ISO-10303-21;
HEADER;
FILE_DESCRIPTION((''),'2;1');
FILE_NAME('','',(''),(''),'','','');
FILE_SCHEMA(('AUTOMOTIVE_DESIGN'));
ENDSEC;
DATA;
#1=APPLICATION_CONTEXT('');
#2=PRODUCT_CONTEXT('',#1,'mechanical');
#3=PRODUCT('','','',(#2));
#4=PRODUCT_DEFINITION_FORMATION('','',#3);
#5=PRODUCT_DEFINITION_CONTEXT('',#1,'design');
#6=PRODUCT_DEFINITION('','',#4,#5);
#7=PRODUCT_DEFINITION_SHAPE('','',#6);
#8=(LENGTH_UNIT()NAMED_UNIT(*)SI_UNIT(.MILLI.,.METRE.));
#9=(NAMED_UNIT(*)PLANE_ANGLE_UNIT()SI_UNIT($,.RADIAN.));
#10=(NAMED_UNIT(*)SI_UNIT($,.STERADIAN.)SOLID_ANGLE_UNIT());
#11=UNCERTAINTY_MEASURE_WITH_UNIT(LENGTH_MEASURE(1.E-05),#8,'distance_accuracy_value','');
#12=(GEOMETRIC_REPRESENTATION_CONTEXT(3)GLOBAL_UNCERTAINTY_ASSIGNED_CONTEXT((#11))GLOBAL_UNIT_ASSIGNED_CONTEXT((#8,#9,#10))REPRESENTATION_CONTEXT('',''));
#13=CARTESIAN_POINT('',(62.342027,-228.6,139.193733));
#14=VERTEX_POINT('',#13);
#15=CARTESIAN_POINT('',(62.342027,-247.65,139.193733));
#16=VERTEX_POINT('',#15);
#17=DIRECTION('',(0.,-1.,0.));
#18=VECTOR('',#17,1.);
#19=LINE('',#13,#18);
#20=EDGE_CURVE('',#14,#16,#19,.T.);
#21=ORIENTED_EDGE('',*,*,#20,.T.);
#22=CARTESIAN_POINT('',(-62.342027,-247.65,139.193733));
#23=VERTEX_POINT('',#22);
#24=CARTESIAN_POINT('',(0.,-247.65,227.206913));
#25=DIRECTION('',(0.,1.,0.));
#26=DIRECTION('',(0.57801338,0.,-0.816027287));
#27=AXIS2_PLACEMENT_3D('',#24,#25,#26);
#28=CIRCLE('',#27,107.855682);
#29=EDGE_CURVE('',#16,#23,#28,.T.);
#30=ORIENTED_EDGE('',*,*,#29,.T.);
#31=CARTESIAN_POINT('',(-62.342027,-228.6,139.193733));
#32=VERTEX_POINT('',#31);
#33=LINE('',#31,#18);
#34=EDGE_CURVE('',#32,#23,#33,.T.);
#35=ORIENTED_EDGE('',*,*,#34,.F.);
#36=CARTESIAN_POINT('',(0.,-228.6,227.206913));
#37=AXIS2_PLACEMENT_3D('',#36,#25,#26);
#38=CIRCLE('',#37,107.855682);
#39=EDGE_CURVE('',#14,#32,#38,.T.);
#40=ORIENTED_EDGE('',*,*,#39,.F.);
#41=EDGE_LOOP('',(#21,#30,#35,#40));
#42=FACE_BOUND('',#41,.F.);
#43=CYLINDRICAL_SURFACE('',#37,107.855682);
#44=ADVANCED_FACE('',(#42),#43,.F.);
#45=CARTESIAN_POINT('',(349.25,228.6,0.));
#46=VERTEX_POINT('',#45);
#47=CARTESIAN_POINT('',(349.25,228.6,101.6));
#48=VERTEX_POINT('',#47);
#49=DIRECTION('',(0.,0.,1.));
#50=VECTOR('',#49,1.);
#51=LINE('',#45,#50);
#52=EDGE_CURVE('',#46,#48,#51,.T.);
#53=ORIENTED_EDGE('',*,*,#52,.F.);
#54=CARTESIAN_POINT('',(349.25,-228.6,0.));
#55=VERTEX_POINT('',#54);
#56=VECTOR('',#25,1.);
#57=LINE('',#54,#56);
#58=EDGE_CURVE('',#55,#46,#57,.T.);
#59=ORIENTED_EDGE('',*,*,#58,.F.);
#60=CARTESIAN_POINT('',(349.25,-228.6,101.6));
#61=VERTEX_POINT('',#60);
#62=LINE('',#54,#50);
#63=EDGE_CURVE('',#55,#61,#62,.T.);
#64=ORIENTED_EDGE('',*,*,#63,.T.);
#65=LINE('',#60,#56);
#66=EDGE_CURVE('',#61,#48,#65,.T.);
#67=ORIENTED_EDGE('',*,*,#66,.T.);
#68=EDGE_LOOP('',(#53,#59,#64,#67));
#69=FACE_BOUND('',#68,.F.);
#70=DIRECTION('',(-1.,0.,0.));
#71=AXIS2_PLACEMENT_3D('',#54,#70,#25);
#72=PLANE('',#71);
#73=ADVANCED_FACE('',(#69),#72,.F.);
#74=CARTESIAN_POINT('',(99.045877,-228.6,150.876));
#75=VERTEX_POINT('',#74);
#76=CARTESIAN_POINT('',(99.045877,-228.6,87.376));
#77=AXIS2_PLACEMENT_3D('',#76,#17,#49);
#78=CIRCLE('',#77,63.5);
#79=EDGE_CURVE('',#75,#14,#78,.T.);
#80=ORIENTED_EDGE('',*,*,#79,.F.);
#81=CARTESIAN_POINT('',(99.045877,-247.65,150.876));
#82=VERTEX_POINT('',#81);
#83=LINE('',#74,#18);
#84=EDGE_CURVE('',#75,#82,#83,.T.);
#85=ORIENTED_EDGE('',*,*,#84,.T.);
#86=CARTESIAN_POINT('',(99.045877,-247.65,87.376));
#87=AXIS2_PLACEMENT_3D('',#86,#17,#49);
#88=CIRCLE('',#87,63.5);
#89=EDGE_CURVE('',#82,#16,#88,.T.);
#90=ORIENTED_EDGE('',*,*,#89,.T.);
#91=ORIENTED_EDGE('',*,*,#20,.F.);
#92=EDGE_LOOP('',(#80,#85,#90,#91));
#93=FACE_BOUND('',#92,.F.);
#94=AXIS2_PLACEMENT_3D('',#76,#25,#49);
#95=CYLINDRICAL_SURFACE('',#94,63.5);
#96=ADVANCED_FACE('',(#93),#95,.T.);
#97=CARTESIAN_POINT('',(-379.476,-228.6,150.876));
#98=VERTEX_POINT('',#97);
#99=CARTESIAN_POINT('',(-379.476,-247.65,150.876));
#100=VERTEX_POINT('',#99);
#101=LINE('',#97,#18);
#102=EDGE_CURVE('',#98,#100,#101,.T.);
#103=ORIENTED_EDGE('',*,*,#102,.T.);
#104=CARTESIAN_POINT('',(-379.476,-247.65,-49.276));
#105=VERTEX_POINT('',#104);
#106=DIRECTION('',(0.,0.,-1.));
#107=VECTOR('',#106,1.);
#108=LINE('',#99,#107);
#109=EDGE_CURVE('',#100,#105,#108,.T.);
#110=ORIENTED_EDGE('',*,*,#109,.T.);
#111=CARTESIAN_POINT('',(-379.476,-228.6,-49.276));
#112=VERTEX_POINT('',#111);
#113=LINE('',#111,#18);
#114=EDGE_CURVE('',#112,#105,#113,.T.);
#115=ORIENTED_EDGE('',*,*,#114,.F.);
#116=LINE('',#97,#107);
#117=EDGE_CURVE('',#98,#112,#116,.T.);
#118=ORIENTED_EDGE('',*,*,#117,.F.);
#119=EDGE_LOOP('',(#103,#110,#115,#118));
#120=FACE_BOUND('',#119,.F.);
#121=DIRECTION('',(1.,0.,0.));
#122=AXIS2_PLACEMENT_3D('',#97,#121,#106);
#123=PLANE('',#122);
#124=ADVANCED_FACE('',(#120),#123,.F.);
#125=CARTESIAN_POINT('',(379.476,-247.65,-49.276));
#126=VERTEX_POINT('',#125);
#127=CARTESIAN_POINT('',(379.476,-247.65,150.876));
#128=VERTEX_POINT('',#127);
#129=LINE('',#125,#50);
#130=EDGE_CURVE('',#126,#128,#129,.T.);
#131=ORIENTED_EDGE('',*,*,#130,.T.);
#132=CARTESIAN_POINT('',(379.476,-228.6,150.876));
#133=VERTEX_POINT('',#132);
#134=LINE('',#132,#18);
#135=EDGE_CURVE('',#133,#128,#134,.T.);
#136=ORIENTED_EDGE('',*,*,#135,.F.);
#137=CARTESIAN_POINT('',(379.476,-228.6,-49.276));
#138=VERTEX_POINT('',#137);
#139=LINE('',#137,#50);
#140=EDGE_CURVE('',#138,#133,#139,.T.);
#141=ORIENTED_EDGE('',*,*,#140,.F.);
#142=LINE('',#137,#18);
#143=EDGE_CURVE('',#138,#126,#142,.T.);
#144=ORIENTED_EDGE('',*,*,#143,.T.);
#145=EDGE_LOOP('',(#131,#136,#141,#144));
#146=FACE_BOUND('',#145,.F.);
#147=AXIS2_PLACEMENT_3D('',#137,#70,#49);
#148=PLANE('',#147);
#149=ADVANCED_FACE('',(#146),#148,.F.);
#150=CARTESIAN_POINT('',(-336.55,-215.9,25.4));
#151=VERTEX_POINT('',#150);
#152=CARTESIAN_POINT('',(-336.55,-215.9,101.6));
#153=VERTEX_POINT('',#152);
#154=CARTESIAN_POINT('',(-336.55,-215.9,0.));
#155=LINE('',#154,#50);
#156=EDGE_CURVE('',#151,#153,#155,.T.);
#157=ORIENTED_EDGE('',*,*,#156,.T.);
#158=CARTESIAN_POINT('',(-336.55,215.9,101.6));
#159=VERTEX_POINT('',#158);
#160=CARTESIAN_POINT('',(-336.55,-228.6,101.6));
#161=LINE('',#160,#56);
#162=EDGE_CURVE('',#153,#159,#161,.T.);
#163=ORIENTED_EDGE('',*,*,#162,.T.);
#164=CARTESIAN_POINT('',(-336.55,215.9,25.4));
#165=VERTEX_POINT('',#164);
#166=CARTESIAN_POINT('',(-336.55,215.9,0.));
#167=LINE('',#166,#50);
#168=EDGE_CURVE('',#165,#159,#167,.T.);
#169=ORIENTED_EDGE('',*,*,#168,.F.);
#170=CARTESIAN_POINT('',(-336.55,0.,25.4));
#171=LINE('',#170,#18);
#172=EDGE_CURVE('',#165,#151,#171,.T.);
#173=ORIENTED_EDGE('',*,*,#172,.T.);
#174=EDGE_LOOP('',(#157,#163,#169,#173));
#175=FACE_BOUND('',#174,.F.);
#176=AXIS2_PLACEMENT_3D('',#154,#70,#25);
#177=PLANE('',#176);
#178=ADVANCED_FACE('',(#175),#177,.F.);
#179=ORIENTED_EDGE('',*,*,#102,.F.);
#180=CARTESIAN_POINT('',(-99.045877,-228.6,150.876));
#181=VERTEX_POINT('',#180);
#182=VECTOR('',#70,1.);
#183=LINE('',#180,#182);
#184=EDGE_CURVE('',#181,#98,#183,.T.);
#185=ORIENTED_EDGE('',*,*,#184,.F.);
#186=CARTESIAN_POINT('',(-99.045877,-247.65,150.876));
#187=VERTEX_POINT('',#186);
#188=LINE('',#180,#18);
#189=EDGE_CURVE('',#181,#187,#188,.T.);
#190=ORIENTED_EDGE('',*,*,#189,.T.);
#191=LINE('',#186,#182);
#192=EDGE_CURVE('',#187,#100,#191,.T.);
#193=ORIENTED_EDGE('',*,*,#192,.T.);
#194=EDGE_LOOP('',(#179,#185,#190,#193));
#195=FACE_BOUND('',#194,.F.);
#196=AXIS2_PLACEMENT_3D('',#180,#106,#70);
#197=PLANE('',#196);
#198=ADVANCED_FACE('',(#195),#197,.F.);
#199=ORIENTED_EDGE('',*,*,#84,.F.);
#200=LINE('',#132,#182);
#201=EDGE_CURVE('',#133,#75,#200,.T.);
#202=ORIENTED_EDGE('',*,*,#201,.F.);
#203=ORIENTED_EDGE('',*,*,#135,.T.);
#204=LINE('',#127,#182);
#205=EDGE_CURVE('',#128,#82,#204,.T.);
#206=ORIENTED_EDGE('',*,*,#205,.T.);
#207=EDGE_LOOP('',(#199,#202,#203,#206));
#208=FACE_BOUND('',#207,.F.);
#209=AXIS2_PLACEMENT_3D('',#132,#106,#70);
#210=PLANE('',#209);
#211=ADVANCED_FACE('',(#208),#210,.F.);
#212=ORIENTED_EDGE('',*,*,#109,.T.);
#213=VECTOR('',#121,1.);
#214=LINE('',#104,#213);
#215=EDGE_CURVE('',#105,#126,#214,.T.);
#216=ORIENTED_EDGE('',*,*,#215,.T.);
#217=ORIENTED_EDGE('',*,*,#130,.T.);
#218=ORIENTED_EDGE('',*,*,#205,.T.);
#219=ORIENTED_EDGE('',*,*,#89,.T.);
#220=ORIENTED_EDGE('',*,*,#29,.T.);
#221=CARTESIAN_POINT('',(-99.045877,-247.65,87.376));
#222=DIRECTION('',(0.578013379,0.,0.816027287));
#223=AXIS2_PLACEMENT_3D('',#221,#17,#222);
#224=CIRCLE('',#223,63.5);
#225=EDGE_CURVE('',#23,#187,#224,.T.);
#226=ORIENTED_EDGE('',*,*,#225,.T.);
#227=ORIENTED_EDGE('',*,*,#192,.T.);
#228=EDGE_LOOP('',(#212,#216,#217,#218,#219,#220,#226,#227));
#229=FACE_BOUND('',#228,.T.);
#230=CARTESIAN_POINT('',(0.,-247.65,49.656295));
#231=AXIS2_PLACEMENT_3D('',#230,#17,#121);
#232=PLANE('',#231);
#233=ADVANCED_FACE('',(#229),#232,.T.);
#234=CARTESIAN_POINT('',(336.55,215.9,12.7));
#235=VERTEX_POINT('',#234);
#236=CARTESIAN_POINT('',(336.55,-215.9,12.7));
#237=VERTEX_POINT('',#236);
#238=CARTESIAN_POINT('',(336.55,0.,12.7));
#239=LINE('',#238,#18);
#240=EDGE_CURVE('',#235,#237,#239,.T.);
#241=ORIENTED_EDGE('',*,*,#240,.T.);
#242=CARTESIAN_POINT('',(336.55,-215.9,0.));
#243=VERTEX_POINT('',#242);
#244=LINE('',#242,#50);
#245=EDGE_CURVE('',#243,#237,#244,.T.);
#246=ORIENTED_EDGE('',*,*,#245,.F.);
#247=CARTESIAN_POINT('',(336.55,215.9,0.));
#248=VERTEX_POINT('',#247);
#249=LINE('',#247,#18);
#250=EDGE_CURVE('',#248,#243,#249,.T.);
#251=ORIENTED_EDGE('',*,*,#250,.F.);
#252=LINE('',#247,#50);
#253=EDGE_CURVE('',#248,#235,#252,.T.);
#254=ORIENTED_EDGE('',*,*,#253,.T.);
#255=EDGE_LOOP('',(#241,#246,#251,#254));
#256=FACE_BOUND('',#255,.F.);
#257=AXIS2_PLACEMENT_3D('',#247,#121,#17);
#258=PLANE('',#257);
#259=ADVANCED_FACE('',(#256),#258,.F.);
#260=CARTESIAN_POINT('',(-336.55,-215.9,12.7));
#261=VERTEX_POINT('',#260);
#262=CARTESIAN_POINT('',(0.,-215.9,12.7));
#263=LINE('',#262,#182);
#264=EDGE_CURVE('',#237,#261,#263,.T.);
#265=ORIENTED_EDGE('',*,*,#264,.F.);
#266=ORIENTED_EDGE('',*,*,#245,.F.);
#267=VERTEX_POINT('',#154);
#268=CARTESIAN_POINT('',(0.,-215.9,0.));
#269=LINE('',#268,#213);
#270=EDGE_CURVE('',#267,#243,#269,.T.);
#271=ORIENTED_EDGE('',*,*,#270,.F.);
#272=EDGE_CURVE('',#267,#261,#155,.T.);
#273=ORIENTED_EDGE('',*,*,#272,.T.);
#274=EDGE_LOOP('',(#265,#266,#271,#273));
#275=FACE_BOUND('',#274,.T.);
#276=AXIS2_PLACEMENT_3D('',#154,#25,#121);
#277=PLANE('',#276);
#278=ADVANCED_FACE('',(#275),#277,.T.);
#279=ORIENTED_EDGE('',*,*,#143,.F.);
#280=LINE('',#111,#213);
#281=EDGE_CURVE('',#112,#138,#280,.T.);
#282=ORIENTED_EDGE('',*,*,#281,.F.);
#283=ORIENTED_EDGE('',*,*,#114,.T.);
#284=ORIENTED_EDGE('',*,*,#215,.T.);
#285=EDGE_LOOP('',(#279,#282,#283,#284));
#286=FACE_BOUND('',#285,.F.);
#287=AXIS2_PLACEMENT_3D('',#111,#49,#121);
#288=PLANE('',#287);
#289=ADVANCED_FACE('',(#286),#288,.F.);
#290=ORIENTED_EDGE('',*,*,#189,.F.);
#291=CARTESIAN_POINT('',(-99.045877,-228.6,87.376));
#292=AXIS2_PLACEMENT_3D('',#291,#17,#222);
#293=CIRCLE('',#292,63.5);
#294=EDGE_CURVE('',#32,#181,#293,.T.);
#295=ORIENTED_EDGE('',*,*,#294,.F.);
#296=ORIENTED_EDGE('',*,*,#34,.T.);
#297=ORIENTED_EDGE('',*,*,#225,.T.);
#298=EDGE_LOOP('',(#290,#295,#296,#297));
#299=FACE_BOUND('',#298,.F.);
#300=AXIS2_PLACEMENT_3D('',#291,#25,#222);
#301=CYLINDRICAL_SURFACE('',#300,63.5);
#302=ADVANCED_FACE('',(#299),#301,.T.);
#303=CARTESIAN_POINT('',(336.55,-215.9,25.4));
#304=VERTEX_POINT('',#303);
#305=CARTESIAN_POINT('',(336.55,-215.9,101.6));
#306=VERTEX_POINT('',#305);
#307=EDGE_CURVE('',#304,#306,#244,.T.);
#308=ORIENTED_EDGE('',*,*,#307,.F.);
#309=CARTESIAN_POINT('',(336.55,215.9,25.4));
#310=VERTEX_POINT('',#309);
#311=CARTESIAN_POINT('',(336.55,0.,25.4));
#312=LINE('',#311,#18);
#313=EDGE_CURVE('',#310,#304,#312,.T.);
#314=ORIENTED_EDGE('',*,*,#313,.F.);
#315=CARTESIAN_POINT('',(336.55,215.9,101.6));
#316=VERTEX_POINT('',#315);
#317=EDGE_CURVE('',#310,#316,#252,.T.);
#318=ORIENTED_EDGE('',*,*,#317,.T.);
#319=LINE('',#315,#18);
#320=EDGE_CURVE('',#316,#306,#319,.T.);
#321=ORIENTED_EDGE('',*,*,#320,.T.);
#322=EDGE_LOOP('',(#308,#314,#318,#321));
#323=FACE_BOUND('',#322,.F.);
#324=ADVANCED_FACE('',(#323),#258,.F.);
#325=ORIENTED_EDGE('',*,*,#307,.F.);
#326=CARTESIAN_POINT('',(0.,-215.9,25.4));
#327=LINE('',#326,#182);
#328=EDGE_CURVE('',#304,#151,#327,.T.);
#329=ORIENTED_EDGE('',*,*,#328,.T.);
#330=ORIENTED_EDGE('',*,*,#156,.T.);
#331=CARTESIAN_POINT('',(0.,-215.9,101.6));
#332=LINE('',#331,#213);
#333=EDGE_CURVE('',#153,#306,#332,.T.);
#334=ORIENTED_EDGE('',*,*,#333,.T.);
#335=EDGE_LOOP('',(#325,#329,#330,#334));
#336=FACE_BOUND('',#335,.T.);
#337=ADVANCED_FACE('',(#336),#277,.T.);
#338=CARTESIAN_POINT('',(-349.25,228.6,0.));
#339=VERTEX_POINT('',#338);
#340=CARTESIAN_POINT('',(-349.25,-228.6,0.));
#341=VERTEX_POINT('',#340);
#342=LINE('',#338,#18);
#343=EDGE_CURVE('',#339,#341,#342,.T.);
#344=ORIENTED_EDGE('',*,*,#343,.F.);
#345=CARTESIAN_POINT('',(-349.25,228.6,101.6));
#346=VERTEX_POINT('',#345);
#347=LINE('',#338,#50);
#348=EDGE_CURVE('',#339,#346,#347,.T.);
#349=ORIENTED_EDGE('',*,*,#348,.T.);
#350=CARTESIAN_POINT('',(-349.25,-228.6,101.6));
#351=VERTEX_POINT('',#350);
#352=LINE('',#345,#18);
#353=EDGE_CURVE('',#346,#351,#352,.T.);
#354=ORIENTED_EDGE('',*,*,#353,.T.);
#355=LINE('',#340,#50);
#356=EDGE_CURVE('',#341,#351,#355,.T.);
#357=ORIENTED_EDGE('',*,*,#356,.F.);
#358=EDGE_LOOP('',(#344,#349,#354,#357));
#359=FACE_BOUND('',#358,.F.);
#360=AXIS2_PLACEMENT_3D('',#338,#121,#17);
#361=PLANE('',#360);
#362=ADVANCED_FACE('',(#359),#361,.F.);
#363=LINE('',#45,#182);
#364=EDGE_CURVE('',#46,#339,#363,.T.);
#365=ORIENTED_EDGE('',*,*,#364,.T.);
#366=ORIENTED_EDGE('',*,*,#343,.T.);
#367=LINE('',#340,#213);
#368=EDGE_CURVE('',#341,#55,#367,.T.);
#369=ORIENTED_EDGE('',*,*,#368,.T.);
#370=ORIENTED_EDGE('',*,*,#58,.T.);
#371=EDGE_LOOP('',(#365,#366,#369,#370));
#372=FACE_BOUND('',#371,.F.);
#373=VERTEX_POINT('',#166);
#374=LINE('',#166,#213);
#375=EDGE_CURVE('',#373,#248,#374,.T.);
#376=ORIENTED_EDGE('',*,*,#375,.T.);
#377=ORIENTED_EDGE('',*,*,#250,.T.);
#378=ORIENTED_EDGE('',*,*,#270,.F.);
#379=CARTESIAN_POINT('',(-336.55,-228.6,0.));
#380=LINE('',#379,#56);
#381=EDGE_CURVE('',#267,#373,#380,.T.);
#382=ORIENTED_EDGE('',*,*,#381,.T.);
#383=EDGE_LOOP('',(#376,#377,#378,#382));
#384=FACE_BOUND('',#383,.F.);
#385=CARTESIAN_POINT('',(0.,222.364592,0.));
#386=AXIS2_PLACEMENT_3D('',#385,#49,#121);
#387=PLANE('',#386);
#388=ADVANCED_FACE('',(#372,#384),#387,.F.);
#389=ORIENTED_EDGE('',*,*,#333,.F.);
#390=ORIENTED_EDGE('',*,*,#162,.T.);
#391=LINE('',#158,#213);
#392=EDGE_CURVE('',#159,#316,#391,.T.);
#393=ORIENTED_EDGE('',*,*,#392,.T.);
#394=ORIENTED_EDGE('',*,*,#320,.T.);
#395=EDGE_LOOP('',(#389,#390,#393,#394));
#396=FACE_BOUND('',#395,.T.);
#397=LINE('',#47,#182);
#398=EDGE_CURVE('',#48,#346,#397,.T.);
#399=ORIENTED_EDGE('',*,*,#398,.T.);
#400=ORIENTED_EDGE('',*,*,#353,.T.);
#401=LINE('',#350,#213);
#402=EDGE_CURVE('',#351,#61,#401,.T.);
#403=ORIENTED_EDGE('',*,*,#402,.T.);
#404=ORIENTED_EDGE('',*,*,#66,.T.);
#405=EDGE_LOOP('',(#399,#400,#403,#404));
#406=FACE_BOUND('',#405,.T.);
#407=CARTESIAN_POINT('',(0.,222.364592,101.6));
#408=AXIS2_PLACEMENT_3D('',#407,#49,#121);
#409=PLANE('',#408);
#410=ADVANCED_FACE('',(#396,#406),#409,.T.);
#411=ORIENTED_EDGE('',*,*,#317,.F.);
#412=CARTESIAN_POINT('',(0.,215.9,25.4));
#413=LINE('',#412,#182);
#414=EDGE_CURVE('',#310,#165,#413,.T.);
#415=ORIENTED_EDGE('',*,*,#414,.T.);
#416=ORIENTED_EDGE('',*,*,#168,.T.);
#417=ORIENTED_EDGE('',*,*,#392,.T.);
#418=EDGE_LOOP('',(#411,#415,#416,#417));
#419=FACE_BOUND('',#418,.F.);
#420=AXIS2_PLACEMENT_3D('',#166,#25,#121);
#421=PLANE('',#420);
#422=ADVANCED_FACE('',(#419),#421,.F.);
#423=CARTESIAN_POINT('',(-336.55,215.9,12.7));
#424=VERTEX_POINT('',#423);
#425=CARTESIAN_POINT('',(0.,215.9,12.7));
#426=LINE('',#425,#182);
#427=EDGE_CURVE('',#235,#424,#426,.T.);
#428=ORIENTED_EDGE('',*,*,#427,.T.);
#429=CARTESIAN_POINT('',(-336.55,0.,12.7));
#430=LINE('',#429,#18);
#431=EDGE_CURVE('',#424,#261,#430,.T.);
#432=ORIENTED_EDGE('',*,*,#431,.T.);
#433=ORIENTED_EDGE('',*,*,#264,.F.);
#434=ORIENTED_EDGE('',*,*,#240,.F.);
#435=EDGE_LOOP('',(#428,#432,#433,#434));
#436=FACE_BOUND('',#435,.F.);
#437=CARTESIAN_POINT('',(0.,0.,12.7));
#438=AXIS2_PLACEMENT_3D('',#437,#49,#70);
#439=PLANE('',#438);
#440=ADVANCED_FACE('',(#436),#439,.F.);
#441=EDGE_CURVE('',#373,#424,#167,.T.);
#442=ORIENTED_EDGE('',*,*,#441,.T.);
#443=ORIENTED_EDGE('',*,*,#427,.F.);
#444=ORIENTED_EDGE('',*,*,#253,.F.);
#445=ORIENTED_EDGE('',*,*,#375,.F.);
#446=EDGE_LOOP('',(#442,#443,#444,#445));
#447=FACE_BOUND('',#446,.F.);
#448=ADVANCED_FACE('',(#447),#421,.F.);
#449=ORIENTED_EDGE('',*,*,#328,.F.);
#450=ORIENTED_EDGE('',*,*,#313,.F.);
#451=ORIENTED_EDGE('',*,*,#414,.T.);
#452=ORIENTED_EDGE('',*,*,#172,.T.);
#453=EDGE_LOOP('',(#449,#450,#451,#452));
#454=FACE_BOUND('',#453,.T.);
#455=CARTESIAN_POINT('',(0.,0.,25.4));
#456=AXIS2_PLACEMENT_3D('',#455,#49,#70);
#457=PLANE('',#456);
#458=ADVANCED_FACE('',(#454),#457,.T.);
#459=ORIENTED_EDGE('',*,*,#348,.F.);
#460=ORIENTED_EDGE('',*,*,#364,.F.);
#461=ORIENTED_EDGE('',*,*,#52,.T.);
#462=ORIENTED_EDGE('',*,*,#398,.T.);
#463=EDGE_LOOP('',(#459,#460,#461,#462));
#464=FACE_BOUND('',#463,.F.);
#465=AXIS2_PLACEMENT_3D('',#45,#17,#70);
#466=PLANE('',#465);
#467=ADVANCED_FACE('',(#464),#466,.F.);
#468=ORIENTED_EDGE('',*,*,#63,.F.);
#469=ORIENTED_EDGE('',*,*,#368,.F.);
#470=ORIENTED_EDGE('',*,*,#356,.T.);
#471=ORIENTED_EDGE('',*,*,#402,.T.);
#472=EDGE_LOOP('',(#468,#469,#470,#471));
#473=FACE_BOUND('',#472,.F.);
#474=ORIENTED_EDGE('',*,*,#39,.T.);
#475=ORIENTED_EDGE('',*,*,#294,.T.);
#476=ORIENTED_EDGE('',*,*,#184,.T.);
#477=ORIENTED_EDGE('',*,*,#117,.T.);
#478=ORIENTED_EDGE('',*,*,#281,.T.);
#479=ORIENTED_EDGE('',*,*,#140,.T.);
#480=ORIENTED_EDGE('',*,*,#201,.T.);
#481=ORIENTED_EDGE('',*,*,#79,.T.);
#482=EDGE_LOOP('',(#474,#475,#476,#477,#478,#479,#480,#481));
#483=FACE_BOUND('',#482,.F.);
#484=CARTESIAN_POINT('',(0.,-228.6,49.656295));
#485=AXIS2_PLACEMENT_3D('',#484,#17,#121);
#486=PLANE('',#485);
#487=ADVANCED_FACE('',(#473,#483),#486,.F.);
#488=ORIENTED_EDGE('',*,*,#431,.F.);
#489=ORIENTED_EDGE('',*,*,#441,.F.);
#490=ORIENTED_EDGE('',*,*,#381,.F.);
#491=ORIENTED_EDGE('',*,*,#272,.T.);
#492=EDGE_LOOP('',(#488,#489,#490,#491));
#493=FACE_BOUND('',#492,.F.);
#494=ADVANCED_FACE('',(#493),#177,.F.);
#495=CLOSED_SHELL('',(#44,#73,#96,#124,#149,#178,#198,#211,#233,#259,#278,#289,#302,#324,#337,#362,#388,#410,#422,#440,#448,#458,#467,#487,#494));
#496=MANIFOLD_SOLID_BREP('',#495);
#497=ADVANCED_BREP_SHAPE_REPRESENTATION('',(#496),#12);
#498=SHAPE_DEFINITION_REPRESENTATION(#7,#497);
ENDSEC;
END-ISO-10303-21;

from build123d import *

# Parameters (mm, degrees)
F0_W     = 673.1
F0_H     = 12.7
F1_DEPTH = 101.6
F3_E11_W = 673.1
F3_E11_H = 431.8
F4_DEPTH = 12.7
F5_W     = 698.5
F5_H     = 101.6
F6_DEPTH = 19.05


with BuildPart() as f1:
    # F0 (on Top) → F1 (new body)
    with BuildSketch(Plane.XY):
        Polygon((336.55, 215.9), (349.25, 228.6), (-349.25, 228.6), (-336.55, 215.9), align=None)
        Polygon((349.25, -228.6), (349.25, 228.6), (336.55, 215.9), (336.55, -215.9), (336.55, -228.6), align=None)
        Polygon((-336.55, 215.9), (-349.25, 228.6), (-349.25, -228.6), (-336.55, -228.6), (-336.55, -215.9), align=None)
        with Locations((0, -222.25)):
            Rectangle(F0_W, F0_H)
    extrude(amount=F1_DEPTH)

    # F3_E11 (on explicit) → F4 (join)
    with BuildSketch(Plane(origin=(336.55, 215.9, 12.7), x_dir=(-1, 0, 0), z_dir=(0, 0, 1))):
        with Locations((336.55, 215.9)):
            Rectangle(F3_E11_W, F3_E11_H)
    extrude(amount=F4_DEPTH)

    # F5 (on face) → F6 (join)
    with BuildSketch(Plane.XZ.offset(228.6)):
        with BuildLine():
            Line((-379.476, -49.276), (379.476, -49.276))
            Line((379.476, -49.276), (379.476, 150.876))
            Line((379.476, 150.876), (99.0458770515, 150.876))
            ThreePointArc((99.0458770515, 150.876), (79.7868016321, 147.884991183), (62.3420274532, 139.1937327241))
            ThreePointArc((62.3420274532, 139.1937327241), (0, 119.3512302291), (-62.3420274532, 139.1937327241))
            ThreePointArc((-62.3420274532, 139.1937327241), (-79.7868016321, 147.884991183), (-99.0458770515, 150.876))
            Line((-99.0458770515, 150.876), (-379.476, 150.876))
            Line((-379.476, 150.876), (-379.476, -49.276))
        make_face()
        with Locations((0, 50.8)):
            Rectangle(F5_W, F5_H, mode=Mode.SUBTRACT)
        with Locations((0, 50.8)):
            Rectangle(F5_W, F5_H)
    extrude(amount=F6_DEPTH)


solid = f1.part
